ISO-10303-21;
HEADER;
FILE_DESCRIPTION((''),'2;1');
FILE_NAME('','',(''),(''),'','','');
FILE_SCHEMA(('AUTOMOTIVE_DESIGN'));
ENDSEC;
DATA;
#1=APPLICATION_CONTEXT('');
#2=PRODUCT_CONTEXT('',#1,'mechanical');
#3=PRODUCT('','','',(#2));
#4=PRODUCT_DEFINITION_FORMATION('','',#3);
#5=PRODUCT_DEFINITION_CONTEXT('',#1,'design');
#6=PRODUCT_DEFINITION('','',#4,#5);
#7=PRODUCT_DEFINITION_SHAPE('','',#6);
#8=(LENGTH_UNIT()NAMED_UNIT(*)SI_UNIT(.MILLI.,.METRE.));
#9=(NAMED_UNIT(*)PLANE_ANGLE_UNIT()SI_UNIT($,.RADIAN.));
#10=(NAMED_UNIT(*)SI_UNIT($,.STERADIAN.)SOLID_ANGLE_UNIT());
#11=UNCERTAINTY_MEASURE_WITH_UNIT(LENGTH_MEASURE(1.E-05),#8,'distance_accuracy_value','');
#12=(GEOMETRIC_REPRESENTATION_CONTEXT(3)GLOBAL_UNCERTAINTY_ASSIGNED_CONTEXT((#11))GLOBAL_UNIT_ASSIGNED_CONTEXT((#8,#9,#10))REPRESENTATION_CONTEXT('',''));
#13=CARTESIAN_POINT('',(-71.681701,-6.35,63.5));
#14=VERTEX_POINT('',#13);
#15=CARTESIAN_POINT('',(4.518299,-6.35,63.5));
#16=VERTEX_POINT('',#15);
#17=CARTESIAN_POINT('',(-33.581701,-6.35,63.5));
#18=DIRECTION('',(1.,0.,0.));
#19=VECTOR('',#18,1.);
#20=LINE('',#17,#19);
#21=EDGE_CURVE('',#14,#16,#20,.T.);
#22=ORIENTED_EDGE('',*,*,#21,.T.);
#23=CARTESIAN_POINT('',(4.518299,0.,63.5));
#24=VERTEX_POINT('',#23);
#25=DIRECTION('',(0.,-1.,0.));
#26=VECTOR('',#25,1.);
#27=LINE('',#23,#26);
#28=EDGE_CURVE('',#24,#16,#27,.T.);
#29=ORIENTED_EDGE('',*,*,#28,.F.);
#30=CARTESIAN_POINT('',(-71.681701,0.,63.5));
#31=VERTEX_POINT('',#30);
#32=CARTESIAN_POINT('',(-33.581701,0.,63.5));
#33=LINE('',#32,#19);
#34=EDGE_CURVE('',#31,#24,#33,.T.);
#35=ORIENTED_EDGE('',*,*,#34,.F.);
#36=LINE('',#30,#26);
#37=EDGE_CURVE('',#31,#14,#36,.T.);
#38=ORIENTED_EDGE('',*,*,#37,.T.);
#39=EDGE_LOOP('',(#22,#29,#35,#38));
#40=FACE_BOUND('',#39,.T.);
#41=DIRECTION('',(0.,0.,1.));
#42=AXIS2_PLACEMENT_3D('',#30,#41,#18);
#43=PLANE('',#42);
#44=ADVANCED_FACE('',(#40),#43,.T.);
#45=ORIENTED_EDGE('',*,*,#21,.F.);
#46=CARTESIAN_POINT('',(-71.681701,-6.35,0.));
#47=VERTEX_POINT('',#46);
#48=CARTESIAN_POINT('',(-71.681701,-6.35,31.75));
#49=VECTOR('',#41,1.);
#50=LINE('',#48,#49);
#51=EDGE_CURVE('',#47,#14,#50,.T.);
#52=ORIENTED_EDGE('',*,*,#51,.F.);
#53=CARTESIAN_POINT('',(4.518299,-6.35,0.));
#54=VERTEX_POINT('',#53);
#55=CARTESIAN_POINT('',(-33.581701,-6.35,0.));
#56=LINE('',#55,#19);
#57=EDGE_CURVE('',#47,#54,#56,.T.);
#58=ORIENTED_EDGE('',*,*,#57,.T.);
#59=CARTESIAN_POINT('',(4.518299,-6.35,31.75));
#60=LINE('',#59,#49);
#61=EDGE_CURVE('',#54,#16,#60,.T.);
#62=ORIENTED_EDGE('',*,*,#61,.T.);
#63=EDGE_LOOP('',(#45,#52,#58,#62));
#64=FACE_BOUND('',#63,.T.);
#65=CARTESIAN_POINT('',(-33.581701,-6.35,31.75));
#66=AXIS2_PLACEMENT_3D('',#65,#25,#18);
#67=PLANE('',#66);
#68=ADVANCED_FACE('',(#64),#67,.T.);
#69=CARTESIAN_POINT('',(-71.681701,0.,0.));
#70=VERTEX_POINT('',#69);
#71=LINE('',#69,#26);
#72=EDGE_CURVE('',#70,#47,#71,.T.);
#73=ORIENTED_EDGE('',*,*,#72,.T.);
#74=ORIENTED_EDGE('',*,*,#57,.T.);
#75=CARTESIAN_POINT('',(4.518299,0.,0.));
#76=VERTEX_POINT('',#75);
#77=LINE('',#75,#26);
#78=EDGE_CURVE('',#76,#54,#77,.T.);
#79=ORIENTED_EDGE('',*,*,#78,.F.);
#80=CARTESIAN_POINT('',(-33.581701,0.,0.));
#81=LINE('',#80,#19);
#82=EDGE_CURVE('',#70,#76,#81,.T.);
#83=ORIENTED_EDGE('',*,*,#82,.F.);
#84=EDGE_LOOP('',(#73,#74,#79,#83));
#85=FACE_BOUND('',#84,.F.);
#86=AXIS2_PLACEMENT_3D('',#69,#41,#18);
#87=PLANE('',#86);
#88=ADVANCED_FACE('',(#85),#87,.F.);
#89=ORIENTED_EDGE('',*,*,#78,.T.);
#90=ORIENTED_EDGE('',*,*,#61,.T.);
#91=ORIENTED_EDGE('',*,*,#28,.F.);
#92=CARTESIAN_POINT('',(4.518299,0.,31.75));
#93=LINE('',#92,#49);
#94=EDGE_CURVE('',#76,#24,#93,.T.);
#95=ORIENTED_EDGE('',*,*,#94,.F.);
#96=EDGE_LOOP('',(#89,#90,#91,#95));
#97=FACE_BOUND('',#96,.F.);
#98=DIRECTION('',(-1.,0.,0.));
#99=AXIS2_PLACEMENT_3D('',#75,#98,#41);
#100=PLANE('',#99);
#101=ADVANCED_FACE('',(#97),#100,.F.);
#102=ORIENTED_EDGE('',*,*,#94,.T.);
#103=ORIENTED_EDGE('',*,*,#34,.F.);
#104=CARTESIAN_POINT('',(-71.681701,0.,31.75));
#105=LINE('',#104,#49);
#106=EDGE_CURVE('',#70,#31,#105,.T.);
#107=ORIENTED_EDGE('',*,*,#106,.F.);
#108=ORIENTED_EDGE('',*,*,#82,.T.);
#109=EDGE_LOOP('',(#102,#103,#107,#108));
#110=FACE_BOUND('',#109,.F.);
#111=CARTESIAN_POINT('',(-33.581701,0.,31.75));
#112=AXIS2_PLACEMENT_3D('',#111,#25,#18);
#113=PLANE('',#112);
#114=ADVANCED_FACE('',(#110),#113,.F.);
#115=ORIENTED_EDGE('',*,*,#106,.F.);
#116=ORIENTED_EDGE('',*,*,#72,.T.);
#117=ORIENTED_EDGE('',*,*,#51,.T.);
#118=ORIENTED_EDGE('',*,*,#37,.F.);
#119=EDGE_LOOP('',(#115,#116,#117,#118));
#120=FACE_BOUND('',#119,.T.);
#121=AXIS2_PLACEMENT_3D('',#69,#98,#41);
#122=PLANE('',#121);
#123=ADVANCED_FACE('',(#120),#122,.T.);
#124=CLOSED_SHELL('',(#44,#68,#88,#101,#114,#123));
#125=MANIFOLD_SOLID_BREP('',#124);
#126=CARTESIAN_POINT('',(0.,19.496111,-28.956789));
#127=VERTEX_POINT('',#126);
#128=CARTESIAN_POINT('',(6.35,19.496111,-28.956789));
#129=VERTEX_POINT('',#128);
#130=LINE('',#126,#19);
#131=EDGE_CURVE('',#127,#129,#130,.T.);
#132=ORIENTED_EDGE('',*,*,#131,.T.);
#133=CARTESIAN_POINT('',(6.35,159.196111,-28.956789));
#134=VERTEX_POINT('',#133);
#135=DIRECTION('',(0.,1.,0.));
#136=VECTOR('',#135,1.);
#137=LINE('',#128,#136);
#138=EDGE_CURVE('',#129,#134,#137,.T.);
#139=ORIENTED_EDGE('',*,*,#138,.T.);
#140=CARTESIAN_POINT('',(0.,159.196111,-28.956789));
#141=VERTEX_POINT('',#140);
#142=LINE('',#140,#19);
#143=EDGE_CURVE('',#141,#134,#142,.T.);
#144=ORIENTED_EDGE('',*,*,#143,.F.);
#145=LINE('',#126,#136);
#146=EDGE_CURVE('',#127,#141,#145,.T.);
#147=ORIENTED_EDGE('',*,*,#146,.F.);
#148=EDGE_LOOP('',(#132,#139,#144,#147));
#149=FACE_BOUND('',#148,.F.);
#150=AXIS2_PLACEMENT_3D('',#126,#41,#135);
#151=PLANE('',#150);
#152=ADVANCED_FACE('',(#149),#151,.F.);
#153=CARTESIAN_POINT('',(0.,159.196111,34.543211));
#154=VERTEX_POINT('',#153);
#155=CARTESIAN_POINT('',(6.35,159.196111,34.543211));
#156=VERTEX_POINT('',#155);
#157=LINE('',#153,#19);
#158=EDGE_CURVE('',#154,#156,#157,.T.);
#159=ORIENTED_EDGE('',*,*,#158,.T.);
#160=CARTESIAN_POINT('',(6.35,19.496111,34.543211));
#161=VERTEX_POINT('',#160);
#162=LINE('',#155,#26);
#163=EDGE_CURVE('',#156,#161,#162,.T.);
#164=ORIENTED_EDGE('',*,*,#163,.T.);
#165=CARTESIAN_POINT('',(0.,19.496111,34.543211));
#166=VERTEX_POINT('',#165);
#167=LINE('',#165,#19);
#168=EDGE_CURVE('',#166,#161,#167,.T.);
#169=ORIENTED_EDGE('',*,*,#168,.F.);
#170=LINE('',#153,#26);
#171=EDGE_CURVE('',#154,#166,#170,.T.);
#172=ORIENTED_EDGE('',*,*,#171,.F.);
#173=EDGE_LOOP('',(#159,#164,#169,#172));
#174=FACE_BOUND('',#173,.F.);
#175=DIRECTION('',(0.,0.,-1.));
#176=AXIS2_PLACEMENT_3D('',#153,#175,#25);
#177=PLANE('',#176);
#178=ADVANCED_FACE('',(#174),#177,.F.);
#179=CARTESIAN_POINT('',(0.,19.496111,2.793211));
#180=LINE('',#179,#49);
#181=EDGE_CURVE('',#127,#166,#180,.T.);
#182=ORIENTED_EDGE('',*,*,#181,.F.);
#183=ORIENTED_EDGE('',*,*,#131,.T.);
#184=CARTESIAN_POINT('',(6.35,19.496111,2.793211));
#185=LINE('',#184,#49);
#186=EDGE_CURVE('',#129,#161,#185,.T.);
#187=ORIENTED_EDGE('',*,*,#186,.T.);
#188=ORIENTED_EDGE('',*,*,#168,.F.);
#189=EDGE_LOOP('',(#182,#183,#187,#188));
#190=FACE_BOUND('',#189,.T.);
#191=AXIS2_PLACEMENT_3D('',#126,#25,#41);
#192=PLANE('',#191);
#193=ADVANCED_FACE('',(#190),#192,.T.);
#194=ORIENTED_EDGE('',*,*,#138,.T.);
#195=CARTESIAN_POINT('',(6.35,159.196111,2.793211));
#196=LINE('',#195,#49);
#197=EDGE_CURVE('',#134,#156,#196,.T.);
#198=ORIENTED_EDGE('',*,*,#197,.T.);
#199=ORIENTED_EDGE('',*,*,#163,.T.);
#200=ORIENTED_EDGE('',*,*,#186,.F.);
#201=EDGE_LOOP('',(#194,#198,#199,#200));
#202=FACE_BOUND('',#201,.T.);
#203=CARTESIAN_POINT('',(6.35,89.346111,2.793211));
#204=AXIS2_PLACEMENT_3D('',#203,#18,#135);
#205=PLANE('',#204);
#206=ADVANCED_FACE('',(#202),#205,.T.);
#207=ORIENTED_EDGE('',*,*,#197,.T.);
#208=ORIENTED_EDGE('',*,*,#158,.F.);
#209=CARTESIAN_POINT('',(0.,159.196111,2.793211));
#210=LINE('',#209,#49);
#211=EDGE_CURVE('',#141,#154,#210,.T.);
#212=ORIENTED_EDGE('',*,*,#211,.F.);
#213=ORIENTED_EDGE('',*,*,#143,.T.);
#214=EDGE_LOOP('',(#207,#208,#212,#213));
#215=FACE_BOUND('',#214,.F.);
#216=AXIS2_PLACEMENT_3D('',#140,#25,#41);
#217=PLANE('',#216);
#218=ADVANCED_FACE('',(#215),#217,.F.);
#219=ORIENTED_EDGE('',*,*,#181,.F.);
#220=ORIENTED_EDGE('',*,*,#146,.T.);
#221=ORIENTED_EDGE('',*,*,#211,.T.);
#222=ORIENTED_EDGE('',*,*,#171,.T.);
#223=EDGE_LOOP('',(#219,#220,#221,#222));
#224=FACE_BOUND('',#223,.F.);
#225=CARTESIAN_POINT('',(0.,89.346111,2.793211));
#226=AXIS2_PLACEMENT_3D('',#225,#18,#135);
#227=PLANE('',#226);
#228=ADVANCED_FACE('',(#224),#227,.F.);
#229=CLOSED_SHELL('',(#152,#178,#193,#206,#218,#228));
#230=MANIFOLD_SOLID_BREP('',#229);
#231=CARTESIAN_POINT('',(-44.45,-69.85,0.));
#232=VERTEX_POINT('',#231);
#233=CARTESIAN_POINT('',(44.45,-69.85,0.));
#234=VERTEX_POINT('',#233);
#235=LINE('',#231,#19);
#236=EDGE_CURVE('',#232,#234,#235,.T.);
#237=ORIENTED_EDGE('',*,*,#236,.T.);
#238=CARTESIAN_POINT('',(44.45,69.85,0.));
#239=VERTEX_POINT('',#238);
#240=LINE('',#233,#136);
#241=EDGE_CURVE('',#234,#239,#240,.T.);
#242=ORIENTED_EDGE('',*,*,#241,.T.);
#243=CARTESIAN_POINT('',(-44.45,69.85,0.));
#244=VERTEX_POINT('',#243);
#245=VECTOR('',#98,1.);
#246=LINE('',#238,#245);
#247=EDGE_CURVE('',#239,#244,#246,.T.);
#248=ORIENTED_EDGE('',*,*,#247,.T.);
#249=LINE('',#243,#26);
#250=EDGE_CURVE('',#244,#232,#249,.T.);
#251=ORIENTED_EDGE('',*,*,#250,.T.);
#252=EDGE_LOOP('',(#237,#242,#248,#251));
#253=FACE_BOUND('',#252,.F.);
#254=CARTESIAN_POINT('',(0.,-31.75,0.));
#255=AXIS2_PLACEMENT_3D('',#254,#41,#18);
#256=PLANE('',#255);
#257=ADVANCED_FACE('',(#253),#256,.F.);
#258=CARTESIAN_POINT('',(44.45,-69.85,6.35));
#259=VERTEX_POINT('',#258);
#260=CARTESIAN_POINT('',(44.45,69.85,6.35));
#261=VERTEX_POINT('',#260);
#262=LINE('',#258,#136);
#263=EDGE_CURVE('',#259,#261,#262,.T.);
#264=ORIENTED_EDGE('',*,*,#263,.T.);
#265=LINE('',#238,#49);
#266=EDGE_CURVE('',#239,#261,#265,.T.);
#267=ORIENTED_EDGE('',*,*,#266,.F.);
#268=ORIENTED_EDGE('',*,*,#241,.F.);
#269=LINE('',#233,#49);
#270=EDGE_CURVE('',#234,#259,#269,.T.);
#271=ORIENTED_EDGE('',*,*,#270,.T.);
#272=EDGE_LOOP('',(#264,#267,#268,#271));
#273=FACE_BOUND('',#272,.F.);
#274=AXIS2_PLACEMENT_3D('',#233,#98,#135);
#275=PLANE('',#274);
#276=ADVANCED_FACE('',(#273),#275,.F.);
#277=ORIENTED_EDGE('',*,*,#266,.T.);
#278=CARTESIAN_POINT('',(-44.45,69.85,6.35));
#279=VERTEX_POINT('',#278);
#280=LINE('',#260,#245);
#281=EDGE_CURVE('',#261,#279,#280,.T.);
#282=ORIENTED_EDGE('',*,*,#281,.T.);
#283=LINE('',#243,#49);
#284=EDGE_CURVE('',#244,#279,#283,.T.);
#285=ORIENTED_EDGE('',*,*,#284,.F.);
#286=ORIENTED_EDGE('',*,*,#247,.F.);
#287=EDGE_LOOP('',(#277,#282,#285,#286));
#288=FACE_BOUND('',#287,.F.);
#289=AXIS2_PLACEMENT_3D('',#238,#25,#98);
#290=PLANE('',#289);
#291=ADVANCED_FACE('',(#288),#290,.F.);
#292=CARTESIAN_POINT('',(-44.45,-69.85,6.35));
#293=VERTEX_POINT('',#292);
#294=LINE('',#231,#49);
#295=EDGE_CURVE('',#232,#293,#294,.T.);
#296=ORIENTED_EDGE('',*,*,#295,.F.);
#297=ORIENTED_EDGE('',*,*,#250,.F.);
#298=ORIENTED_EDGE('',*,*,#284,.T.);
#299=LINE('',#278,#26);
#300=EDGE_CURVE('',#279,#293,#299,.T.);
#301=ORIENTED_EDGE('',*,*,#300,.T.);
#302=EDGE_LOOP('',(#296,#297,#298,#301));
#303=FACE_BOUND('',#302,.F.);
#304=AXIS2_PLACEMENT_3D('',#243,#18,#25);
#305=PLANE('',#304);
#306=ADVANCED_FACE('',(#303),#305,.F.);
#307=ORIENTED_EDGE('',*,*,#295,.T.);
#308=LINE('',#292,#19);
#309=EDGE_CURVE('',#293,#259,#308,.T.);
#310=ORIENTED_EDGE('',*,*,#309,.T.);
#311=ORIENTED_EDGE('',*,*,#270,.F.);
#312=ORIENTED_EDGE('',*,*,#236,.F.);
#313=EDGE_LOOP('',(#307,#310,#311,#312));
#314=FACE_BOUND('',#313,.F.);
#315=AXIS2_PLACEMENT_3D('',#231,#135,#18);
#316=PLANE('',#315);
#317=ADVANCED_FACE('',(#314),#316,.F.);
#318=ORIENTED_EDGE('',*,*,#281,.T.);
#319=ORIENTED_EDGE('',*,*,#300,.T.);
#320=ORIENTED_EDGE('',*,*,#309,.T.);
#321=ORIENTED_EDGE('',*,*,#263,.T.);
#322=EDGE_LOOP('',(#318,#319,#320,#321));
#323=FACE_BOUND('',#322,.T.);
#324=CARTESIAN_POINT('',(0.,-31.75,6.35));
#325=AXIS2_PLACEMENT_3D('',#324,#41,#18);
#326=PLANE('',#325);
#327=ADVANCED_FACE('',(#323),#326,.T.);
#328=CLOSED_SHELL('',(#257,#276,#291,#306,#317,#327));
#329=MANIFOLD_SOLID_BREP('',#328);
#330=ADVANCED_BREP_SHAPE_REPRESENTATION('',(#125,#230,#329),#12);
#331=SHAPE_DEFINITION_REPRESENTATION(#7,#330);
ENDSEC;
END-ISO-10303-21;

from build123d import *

# Parameters (mm, degrees)
F2_W     = 76.2
F2_H     = 63.5
F3_DEPTH = 6.35
F1_W     = 127
F1_H     = 63.5
F1_W_2   = 6.35
F4_DEPTH = 6.35
F5_DEPTH = 6.35


with BuildPart() as f3:
    # F2 (on Front) → F3 (new body)
    with BuildSketch(Plane.XZ):
        with Locations((-33.5817006469, 31.75)):
            Rectangle(F2_W, F2_H)
    extrude(amount=F3_DEPTH)


with BuildPart() as f4:
    # F1 (on Right) → F4 (new body)
    with BuildSketch(Plane.YZ):
        with Locations((89.3461111993, 2.793211019)):
            Rectangle(F1_W, F1_H)
        with Locations((22.6711111993, 2.793211019)):
            Rectangle(F1_W_2, F1_H)
        with Locations((156.0211111993, 2.793211019)):
            Rectangle(F1_W_2, F1_H)
    extrude(amount=F4_DEPTH)


with BuildPart() as f5:
    # F0 (on Top) → F5 (new body)
    with BuildSketch(Plane.XY):
        Polygon((38.1, 0), (0, 0), (-38.1, 0), (-38.1, -63.5), (0, -63.5), (38.1, -63.5), align=None)
        Polygon((-38.1, 0), (0, 0), (38.1, 0), (38.1, 63.5), (0, 63.5), (-38.1, 63.5), align=None)
        Polygon((-44.45, 0), (-38.1, 0), (-38.1, 63.5), (0, 63.5), (0, 69.85), (-44.45, 69.85), align=None)
        Polygon((-38.1, -63.5), (-38.1, 0), (-44.45, 0), (-44.45, -69.85), (0, -69.85), (0, -63.5), align=None)
        Polygon((44.45, 0), (38.1, 0), (38.1, -63.5), (0, -63.5), (0, -69.85), (44.45, -69.85), align=None)
        Polygon((38.1, 63.5), (38.1, 0), (44.45, 0), (44.45, 69.85), (0, 69.85), (0, 63.5), align=None)
    extrude(amount=F5_DEPTH)


solid = Compound([f3.part, f4.part, f5.part])
